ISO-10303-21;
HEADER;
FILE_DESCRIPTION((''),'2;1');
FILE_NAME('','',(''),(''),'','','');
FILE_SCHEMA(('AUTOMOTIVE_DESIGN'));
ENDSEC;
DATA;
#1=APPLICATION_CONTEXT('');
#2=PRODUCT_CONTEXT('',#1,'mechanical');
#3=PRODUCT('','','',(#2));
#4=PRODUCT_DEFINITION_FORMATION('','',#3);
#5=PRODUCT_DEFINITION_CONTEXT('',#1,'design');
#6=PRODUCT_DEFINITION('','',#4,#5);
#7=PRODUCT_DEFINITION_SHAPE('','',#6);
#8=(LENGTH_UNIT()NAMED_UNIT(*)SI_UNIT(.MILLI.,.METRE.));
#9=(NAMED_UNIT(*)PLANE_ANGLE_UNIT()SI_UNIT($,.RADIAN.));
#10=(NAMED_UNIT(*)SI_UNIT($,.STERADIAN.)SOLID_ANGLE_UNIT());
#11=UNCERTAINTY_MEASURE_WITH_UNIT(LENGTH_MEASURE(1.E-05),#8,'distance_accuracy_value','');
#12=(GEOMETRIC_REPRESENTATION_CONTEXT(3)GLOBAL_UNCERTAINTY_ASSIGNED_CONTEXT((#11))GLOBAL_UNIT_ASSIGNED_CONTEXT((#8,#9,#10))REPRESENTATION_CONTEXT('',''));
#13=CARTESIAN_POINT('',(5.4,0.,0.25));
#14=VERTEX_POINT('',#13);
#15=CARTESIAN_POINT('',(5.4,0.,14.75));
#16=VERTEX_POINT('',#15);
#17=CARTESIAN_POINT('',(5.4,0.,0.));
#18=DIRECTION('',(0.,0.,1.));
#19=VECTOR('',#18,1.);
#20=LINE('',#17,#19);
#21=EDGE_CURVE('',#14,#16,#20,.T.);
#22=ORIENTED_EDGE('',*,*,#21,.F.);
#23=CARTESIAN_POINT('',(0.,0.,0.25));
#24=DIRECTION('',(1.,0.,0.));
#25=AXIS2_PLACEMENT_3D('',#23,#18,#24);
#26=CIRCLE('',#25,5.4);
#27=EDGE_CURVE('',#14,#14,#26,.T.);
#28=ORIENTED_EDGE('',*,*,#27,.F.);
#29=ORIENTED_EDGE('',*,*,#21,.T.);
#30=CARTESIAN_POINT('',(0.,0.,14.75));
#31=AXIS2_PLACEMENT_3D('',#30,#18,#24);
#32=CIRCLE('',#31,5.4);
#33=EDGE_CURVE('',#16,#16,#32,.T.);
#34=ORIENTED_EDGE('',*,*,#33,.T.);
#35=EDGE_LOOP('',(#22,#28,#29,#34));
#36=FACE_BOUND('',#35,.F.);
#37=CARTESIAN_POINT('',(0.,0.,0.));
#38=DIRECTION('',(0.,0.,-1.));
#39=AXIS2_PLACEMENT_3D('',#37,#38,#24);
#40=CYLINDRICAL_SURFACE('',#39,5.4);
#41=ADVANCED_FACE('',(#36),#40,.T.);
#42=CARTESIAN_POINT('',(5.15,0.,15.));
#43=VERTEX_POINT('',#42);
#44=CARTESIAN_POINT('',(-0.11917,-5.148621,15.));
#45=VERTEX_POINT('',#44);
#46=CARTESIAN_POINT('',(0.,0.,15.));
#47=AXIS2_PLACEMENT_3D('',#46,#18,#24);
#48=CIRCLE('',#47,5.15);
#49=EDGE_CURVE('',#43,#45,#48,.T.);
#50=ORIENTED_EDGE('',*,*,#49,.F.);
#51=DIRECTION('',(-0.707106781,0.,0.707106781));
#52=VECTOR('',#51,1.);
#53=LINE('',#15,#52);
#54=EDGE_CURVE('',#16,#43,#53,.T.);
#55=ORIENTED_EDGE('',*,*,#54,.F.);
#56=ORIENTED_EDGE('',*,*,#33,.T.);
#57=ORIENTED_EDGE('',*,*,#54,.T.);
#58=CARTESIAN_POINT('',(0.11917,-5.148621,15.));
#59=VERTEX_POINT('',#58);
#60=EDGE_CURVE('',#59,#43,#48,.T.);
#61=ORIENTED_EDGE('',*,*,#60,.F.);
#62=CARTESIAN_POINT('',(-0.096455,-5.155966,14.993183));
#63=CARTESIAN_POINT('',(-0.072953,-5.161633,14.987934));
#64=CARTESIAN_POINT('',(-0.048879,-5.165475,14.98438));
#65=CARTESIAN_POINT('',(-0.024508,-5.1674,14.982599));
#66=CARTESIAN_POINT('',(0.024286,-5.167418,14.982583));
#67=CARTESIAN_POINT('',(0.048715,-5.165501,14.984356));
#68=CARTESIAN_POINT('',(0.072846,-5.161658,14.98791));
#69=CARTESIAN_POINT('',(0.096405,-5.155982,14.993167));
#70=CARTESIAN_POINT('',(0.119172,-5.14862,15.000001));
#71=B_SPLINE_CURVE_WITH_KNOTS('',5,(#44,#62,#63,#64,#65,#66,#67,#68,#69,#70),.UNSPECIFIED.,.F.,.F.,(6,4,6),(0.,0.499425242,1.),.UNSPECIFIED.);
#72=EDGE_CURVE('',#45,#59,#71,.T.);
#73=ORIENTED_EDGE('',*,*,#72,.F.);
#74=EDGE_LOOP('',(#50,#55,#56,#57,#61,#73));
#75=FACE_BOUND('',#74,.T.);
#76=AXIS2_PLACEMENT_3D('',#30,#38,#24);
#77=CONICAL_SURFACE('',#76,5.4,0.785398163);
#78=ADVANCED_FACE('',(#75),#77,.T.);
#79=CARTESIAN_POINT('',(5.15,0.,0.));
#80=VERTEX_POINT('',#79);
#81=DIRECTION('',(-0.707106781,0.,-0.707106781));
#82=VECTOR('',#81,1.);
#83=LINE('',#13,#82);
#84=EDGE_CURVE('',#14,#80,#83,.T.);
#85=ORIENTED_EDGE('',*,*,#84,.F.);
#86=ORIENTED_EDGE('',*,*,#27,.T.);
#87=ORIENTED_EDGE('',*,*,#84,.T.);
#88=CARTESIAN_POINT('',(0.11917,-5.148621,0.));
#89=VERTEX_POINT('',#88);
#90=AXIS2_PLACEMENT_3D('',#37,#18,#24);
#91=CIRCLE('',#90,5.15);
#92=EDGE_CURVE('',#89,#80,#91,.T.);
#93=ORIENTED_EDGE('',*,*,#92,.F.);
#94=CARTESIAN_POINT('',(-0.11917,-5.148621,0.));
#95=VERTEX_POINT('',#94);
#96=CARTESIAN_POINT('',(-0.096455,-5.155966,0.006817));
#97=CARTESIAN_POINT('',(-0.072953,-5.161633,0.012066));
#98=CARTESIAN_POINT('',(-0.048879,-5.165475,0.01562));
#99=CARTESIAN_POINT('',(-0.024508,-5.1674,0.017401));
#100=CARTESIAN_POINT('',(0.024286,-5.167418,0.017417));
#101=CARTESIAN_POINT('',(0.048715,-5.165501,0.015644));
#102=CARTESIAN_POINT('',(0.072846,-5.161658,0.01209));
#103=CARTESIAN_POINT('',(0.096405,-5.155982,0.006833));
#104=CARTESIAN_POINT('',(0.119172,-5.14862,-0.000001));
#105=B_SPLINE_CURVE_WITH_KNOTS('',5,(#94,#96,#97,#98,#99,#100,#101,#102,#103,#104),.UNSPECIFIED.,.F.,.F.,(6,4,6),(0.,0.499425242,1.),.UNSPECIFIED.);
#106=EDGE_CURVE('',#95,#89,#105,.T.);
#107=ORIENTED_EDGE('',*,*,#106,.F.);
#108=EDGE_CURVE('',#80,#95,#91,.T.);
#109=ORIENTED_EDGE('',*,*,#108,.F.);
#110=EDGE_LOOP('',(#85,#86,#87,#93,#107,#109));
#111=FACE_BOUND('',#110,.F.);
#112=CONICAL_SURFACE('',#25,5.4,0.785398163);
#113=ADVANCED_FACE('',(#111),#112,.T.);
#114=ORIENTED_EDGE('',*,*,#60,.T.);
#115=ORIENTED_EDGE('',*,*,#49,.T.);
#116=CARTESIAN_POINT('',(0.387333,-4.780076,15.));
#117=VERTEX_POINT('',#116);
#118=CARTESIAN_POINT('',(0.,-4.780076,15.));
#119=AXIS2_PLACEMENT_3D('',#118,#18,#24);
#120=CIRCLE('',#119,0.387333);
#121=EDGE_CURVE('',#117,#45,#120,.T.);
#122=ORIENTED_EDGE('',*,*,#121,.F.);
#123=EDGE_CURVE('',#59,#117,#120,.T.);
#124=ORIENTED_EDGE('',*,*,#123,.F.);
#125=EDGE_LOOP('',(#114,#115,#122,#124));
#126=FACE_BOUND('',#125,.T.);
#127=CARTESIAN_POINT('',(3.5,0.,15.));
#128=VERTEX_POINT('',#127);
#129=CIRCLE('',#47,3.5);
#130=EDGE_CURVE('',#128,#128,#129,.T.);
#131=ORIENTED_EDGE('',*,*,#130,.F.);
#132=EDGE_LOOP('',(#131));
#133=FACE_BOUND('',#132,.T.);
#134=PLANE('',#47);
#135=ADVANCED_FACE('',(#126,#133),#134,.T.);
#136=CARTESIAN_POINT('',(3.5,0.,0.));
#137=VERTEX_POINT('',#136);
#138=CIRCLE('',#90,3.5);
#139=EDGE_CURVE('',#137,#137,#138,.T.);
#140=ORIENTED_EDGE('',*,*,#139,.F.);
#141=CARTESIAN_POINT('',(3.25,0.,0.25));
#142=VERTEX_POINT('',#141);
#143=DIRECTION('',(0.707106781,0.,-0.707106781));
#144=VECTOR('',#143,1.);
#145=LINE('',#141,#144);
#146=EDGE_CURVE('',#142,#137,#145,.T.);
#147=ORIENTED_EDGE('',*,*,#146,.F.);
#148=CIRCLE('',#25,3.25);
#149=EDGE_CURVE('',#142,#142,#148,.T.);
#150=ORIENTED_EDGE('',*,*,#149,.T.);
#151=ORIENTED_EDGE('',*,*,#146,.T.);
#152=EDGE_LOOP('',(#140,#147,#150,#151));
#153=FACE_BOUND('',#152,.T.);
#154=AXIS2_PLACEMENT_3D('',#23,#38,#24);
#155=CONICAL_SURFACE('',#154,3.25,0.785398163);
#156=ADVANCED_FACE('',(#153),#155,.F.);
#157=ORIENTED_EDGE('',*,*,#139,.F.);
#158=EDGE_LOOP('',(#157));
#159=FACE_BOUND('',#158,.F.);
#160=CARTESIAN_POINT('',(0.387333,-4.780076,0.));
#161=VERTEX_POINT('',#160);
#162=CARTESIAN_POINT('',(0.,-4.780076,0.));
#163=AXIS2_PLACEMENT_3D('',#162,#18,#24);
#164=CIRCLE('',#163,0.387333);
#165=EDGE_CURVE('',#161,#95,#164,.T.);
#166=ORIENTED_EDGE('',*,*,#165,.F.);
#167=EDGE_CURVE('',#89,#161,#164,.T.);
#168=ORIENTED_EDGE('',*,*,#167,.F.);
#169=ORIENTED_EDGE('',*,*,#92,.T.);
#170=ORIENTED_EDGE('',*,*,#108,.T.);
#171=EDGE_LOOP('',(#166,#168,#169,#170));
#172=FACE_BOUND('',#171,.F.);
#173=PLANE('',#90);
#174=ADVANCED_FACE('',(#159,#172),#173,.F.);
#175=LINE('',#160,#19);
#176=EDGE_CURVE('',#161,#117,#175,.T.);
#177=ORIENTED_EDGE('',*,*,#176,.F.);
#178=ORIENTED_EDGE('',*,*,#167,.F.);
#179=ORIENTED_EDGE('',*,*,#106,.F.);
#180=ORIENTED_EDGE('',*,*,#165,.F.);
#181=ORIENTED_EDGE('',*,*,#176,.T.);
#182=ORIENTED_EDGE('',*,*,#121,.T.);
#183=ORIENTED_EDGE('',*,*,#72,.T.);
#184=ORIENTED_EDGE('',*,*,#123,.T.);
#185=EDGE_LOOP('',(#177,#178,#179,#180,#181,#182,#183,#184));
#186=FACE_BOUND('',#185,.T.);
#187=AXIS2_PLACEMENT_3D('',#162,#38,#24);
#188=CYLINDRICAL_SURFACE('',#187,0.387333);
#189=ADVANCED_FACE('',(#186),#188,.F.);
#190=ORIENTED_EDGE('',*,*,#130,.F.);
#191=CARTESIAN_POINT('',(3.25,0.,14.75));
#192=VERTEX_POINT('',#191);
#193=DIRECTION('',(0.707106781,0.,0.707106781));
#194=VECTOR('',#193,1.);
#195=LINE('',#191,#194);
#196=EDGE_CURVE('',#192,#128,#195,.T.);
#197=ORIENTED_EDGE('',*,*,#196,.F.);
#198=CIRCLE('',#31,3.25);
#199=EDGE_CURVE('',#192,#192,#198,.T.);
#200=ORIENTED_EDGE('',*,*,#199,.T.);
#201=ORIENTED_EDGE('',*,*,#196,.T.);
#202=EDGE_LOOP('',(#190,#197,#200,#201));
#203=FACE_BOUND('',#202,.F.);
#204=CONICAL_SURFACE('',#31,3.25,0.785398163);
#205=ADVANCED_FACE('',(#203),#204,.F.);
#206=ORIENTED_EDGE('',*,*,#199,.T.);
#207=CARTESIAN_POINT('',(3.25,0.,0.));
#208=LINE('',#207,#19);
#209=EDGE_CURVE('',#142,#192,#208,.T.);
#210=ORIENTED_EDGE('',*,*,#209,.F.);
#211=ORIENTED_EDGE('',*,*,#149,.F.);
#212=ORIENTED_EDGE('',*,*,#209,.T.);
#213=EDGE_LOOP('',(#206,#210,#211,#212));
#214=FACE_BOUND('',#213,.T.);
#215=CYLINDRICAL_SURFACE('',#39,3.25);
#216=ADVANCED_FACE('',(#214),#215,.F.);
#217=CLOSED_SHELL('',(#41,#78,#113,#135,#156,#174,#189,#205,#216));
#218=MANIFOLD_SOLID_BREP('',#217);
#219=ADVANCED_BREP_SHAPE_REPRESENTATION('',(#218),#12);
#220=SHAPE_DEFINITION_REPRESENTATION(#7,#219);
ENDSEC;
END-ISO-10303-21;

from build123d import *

# Parameters (mm, degrees)
F0_R     = 5.4
F0_R_2   = 0.3873329086
F0_R_3   = 3.25
F1_DEPTH = 15


# Not quite as in the source:
# - a fillet or chamfer that OpenCascade refuses, or shapes differently, is made with other operations: its cross-section is extruded or revolved along the edge and cut away or added


with BuildPart() as f1:
    # F0 (on Top) → F1 (new body)
    with BuildSketch(Plane.XY):
        Circle(F0_R)
        with Locations((0, -4.7800762477)):
            Circle(F0_R_2, mode=Mode.SUBTRACT)
        Circle(F0_R_3, mode=Mode.SUBTRACT)
    extrude(amount=F1_DEPTH)

    # F2: chamfer of 0.25 on 3 edges, made by hand

    # F2_s1 → F2_t2 (revolve, cut)
    with BuildSketch(Plane.XZ):
        Polygon((3.25, 14.75), (3.5, 15), (3.25, 15), align=None)
    revolve(axis=Axis((0, 0, 15), (0, 0, 1)), mode=Mode.SUBTRACT)

    # F2_s3 → F2_t4 (revolve, cut)
    with BuildSketch(Plane.XZ):
        Polygon((5.4, 14.75), (5.15, 15), (5.4, 15), align=None)
    revolve(axis=Axis((0, 0, 15), (0, 0, 1)), mode=Mode.SUBTRACT)

    # F2_s5 → F2_t6 (revolve, cut)
    with BuildSketch(Plane.XZ):
        Polygon((3.25, 0.25), (3.5, 0), (3.25, 0), align=None)
    revolve(axis=Axis((0, 0, 0), (0, 0, 1)), mode=Mode.SUBTRACT)

    # F3: chamfer of 0.25 on 1 edges, made by hand

    # F3_s1 → F3_t2 (revolve, cut)
    with BuildSketch(Plane.XZ):
        Polygon((5.4, 0.25), (5.15, 0), (5.4, 0), align=None)
    revolve(axis=Axis((0, 0, 0), (0, 0, 1)), mode=Mode.SUBTRACT)


solid = f1.part
